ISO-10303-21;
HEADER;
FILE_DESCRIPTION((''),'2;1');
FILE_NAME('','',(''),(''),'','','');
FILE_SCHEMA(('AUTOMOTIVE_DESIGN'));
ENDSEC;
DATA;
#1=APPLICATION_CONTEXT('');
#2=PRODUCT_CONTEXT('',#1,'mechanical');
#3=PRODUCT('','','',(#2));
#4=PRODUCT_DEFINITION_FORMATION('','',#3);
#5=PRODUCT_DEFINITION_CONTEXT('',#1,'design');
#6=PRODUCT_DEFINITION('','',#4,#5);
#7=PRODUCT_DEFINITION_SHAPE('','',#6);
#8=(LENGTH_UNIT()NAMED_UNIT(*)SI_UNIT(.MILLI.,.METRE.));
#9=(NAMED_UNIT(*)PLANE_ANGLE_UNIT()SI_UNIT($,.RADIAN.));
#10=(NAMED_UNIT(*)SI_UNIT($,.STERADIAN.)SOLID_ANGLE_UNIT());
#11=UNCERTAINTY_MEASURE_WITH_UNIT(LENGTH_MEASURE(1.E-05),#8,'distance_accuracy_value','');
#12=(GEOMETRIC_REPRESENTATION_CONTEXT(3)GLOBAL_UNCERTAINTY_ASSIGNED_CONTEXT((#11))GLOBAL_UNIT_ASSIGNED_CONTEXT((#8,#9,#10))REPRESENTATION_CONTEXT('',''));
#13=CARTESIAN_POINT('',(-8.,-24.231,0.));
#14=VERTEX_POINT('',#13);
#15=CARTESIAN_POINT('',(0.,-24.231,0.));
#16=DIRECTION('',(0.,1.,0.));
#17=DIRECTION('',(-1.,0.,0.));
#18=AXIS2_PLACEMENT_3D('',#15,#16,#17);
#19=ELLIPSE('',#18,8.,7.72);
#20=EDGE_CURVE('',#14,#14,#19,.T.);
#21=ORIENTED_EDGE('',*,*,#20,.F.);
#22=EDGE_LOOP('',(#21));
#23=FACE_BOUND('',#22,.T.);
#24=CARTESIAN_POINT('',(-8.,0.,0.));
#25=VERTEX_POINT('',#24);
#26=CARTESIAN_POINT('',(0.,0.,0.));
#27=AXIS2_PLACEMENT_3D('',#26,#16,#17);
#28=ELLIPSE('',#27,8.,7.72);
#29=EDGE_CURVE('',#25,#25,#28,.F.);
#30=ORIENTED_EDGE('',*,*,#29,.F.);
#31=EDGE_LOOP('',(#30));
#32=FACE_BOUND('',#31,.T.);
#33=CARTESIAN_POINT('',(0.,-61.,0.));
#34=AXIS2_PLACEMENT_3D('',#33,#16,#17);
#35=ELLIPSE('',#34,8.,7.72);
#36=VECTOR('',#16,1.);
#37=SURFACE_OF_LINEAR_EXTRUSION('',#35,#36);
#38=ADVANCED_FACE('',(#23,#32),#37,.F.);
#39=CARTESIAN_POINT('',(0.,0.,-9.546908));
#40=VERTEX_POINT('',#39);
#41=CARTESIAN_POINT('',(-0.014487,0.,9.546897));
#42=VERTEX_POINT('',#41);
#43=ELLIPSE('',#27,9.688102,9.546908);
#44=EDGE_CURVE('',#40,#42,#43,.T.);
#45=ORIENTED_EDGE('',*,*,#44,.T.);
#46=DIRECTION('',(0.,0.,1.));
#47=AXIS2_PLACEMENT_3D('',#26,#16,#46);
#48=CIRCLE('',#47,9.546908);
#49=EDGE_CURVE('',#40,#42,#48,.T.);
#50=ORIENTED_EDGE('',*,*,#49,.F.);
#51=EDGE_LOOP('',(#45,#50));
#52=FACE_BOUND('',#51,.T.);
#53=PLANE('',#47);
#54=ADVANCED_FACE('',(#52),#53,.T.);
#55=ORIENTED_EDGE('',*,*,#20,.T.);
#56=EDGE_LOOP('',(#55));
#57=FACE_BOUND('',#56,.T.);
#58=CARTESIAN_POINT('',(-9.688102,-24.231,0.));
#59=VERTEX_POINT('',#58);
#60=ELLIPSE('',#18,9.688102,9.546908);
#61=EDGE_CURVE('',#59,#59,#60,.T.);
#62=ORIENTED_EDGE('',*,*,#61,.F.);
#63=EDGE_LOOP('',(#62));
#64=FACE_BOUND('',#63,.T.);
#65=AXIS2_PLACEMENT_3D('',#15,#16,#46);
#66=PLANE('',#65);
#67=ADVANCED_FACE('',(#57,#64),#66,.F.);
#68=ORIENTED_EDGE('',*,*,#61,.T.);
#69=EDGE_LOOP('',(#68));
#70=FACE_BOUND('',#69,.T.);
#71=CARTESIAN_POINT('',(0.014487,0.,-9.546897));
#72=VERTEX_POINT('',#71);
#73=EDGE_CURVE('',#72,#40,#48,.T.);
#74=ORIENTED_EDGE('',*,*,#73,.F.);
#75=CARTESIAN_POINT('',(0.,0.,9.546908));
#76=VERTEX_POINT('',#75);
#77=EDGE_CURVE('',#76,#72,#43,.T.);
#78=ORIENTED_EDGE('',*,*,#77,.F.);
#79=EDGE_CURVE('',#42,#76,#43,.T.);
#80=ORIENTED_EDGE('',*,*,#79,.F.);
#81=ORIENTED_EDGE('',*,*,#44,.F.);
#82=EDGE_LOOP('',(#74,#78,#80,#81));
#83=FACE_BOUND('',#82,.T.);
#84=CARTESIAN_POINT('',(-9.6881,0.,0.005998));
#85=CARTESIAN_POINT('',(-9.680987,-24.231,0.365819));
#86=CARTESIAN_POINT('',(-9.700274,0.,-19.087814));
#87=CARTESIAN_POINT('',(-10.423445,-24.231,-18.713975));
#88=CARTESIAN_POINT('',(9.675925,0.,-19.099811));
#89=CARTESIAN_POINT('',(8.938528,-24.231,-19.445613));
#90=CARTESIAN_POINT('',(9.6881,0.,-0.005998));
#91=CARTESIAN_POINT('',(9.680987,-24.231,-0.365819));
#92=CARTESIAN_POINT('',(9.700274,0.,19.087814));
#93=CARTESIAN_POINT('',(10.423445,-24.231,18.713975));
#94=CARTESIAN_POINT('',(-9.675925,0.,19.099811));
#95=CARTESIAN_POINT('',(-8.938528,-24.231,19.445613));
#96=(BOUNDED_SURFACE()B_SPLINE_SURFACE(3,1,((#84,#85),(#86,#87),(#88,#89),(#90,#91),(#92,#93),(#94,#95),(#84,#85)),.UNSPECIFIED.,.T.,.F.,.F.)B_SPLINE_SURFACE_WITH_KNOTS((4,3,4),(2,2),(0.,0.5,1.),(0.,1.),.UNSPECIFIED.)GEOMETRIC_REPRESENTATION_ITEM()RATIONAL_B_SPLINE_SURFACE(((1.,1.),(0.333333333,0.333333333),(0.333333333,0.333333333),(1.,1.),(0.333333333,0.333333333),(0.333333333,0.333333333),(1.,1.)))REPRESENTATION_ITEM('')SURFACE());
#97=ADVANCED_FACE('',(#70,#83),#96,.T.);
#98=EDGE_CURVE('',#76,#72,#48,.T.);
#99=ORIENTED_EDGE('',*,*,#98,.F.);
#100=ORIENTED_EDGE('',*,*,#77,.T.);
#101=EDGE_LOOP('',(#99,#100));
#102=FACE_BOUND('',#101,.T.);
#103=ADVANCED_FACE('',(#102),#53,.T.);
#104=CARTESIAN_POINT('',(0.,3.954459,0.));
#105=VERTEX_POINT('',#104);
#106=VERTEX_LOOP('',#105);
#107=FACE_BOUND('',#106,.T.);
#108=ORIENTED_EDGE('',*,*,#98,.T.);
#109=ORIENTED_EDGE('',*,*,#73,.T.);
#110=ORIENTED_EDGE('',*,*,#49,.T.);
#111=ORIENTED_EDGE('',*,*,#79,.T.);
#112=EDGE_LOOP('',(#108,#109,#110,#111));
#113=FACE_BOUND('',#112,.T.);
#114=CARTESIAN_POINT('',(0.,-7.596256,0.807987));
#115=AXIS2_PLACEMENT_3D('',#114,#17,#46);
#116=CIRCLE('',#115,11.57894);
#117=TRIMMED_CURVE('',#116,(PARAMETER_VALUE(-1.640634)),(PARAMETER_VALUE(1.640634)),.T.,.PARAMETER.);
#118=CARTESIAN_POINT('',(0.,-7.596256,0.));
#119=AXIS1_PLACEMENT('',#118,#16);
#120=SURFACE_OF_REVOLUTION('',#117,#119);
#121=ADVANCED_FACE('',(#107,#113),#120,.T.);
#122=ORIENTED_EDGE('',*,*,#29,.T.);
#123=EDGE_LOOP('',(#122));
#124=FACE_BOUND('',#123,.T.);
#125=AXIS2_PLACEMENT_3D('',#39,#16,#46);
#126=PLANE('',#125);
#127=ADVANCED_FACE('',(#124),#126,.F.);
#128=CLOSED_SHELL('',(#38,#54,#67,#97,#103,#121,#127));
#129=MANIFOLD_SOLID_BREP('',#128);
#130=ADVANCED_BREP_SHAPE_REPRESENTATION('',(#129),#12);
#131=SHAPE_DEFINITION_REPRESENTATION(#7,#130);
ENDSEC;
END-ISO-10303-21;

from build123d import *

# Parameters (mm, degrees)
SKETCH1_RX         = 8
SKETCH1_RY         = 7.72
CUT_EXTRUDE1_DEPTH = 61


with BuildPart() as part:
    # Loft2: read off the stored shape, not the designer's step
    # Loft2: loft between two sections, ruled curve by curve
    loft2_from = [
        Edge.make_bspline([(-9.688099795, 0, 0.005998499), (-9.700274222, 0, -19.087814103), (9.675925368, 0, -19.099811101), (9.688099795, 0, -0.005998499), (9.700274222, 0, 19.087814103), (-9.675925368, 0, 19.099811101), (-9.688099795, 0, 0.005998499)], [0, 0, 0, 0, 0.5, 0.5, 0.5, 1, 1, 1, 1], 3, [1, 0.333333333, 0.333333333, 1, 0.333333333, 0.333333333, 1]),
    ]
    loft2_to = [
        Edge.make_bspline([(-9.680986707, -24.231, 0.365818879), (-10.423444986, -24.231, -18.713974877), (8.938528428, -24.231, -19.445612636), (9.680986707, -24.231, -0.365818879), (10.423444986, -24.231, 18.713974877), (-8.938528428, -24.231, 19.445612636), (-9.680986707, -24.231, 0.365818879)], [0, 0, 0, 0, 0.5, 0.5, 0.5, 1, 1, 1, 1], 3, [1, 0.333333333, 0.333333333, 1, 0.333333333, 0.333333333, 1]),
    ]
    loft2 = Solid(Shell([*[Face.make_surface_from_curves(loft2_from[k], loft2_to[k]) for k in range(1)], Face(Wire(loft2_from)), Face(Wire(loft2_to))]))
    add(loft2)

    # Sketch1 → Cut-Extrude1 (cut)
    with BuildSketch(Plane(origin=(0, 0, 0), x_dir=(1, 0, 0), z_dir=(0, 1, 0))):
        with Locations(Location((0, 0), (0, 0, 180))):
            Ellipse(SKETCH1_RX, SKETCH1_RY)
    extrude(amount=-CUT_EXTRUDE1_DEPTH, mode=Mode.SUBTRACT)

    # Sketch7 → Revolve1 (revolve)
    with BuildSketch(Plane(origin=(0, 0, 0), x_dir=(0, 0, -1), z_dir=(1, 0, 0))):
        with BuildLine():
            Line((0, 3.954458849), (0, 0))
            Line((0, 0), (9.546908185, 0))
            ThreePointArc((9.546908185, 0), (5.239055183, 3.101289891), (0, 3.954458849))
        make_face()
    revolve(axis=Axis((0, 0, 0), (0, -1, 0)))


solid = part.part
